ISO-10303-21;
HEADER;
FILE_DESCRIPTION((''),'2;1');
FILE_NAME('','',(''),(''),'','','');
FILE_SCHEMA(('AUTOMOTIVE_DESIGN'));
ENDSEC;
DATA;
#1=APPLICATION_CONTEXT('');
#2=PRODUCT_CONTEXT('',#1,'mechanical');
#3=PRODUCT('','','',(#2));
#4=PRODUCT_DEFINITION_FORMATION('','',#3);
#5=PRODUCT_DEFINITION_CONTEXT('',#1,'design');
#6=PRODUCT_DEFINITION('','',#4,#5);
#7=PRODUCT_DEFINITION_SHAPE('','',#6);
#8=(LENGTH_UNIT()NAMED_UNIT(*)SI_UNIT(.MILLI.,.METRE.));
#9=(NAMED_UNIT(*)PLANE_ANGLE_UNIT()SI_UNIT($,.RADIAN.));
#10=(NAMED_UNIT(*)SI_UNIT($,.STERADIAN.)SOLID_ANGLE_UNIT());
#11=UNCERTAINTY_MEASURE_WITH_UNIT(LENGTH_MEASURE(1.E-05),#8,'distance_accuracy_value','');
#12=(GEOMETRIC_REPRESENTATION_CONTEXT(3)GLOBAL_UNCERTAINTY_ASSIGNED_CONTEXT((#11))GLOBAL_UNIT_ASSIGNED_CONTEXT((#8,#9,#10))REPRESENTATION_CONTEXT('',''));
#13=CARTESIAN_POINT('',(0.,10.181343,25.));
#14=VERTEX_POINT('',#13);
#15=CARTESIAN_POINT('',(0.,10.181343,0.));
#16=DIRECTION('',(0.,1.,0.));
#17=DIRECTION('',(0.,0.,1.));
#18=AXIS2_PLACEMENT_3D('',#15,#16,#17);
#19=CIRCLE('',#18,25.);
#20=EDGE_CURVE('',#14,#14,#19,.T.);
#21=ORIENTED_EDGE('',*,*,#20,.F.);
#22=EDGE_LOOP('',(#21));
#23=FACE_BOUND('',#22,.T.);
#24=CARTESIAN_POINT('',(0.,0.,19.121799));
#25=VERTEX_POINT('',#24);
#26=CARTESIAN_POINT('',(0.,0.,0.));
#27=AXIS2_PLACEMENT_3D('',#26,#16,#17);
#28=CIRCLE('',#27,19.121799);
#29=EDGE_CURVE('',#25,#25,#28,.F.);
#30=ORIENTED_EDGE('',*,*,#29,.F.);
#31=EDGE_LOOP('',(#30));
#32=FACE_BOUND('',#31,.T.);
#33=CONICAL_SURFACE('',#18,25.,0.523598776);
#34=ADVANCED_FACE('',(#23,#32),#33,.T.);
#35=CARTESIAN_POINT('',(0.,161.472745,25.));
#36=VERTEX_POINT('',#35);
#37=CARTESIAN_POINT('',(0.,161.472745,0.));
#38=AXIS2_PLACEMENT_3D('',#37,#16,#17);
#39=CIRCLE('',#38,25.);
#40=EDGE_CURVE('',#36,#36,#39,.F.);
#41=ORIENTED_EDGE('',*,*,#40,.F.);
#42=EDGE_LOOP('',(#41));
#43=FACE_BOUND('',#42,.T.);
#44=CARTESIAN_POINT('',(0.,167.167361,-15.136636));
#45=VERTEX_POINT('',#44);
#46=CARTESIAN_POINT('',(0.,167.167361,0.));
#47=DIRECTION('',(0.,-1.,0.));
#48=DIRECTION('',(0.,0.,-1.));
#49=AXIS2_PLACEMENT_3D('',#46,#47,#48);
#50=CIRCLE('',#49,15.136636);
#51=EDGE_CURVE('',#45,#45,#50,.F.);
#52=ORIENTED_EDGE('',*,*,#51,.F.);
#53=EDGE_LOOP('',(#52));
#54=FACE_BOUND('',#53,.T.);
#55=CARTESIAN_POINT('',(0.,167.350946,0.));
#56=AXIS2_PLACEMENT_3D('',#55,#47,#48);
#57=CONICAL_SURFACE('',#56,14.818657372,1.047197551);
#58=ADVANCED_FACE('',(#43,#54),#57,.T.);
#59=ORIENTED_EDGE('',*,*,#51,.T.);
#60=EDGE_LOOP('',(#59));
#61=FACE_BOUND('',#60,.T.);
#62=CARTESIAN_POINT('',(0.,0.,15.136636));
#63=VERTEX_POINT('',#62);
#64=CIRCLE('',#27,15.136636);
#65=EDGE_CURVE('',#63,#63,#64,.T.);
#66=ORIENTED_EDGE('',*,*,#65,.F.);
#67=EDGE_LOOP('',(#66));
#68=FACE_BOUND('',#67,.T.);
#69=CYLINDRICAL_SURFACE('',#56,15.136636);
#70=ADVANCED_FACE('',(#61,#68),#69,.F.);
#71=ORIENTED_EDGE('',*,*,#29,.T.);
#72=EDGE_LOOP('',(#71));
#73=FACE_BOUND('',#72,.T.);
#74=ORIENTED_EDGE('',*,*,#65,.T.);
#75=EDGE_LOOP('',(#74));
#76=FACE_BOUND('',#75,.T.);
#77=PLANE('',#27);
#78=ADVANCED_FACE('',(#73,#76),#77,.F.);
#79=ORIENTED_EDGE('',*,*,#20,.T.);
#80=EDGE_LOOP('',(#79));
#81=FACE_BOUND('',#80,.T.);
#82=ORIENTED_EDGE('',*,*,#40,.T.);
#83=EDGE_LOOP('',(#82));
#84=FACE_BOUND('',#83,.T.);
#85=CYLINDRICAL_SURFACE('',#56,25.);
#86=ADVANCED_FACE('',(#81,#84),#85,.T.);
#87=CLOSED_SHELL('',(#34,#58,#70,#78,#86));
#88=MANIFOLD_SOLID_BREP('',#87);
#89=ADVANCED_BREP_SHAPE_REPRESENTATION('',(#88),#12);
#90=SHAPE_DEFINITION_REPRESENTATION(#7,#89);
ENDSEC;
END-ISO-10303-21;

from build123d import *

# Parameters (mm, degrees)
SKETCH1_R           = 25
BOSS_EXTRUDE1_DEPTH = 167.350946
SKETCH2_R           = 15.136636065
CUT_EXTRUDE1_DEPTH  = 172.044845368
CHAMFER1_SIZE       = 5.878201
CHAMFER1_SIZE_2     = 10.181343


with BuildPart() as part:
    # Sketch1 → Boss-Extrude1 (new body)
    with BuildSketch(Plane(origin=(0, 0, 0), x_dir=(1, 0, 0), z_dir=(0, 1, 0))):
        with Locations(Location((0, 0, 0), (0, 0, 270))):
            Circle(SKETCH1_R)
    extrude(amount=BOSS_EXTRUDE1_DEPTH)

    # Sketch2 → Cut-Extrude1 (cut, through all)
    with BuildSketch(Plane(origin=(0, 0, 0), x_dir=(1, 0, 0), z_dir=(0, 1, 0))):
        with Locations(Location((0, 0, 0), (0, 0, 270))):
            Circle(SKETCH2_R)
    extrude(amount=CUT_EXTRUDE1_DEPTH, mode=Mode.SUBTRACT)

    # Chamfer1
    # the kernel refuses this chamfer: 10.181343, 5.878201 mm, written as the material it takes off along each edge
    with BuildSketch(Plane(origin=(0, 167.350946, 0), x_dir=(0, 0, 1), z_dir=(-1, 0, 0))) as chamfer1_piece_1:
        Polygon((25, -CHAMFER1_SIZE), (25 - CHAMFER1_SIZE_2, 0), (25, 0), align=None)
    revolve(axis=Axis((0, 167.350946, 0), (0, 1, 0)), mode=Mode.SUBTRACT)
    with BuildSketch(Plane(origin=(0, 0, 0), x_dir=(0, 0, 1), z_dir=(-1, 0, 0))) as chamfer1_piece_2:
        Polygon((25, CHAMFER1_SIZE_2), (25 - CHAMFER1_SIZE, 0), (25, 0), align=None)
    revolve(axis=Axis((0, 0, 0), (0, 1, 0)), mode=Mode.SUBTRACT)


solid = part.part
